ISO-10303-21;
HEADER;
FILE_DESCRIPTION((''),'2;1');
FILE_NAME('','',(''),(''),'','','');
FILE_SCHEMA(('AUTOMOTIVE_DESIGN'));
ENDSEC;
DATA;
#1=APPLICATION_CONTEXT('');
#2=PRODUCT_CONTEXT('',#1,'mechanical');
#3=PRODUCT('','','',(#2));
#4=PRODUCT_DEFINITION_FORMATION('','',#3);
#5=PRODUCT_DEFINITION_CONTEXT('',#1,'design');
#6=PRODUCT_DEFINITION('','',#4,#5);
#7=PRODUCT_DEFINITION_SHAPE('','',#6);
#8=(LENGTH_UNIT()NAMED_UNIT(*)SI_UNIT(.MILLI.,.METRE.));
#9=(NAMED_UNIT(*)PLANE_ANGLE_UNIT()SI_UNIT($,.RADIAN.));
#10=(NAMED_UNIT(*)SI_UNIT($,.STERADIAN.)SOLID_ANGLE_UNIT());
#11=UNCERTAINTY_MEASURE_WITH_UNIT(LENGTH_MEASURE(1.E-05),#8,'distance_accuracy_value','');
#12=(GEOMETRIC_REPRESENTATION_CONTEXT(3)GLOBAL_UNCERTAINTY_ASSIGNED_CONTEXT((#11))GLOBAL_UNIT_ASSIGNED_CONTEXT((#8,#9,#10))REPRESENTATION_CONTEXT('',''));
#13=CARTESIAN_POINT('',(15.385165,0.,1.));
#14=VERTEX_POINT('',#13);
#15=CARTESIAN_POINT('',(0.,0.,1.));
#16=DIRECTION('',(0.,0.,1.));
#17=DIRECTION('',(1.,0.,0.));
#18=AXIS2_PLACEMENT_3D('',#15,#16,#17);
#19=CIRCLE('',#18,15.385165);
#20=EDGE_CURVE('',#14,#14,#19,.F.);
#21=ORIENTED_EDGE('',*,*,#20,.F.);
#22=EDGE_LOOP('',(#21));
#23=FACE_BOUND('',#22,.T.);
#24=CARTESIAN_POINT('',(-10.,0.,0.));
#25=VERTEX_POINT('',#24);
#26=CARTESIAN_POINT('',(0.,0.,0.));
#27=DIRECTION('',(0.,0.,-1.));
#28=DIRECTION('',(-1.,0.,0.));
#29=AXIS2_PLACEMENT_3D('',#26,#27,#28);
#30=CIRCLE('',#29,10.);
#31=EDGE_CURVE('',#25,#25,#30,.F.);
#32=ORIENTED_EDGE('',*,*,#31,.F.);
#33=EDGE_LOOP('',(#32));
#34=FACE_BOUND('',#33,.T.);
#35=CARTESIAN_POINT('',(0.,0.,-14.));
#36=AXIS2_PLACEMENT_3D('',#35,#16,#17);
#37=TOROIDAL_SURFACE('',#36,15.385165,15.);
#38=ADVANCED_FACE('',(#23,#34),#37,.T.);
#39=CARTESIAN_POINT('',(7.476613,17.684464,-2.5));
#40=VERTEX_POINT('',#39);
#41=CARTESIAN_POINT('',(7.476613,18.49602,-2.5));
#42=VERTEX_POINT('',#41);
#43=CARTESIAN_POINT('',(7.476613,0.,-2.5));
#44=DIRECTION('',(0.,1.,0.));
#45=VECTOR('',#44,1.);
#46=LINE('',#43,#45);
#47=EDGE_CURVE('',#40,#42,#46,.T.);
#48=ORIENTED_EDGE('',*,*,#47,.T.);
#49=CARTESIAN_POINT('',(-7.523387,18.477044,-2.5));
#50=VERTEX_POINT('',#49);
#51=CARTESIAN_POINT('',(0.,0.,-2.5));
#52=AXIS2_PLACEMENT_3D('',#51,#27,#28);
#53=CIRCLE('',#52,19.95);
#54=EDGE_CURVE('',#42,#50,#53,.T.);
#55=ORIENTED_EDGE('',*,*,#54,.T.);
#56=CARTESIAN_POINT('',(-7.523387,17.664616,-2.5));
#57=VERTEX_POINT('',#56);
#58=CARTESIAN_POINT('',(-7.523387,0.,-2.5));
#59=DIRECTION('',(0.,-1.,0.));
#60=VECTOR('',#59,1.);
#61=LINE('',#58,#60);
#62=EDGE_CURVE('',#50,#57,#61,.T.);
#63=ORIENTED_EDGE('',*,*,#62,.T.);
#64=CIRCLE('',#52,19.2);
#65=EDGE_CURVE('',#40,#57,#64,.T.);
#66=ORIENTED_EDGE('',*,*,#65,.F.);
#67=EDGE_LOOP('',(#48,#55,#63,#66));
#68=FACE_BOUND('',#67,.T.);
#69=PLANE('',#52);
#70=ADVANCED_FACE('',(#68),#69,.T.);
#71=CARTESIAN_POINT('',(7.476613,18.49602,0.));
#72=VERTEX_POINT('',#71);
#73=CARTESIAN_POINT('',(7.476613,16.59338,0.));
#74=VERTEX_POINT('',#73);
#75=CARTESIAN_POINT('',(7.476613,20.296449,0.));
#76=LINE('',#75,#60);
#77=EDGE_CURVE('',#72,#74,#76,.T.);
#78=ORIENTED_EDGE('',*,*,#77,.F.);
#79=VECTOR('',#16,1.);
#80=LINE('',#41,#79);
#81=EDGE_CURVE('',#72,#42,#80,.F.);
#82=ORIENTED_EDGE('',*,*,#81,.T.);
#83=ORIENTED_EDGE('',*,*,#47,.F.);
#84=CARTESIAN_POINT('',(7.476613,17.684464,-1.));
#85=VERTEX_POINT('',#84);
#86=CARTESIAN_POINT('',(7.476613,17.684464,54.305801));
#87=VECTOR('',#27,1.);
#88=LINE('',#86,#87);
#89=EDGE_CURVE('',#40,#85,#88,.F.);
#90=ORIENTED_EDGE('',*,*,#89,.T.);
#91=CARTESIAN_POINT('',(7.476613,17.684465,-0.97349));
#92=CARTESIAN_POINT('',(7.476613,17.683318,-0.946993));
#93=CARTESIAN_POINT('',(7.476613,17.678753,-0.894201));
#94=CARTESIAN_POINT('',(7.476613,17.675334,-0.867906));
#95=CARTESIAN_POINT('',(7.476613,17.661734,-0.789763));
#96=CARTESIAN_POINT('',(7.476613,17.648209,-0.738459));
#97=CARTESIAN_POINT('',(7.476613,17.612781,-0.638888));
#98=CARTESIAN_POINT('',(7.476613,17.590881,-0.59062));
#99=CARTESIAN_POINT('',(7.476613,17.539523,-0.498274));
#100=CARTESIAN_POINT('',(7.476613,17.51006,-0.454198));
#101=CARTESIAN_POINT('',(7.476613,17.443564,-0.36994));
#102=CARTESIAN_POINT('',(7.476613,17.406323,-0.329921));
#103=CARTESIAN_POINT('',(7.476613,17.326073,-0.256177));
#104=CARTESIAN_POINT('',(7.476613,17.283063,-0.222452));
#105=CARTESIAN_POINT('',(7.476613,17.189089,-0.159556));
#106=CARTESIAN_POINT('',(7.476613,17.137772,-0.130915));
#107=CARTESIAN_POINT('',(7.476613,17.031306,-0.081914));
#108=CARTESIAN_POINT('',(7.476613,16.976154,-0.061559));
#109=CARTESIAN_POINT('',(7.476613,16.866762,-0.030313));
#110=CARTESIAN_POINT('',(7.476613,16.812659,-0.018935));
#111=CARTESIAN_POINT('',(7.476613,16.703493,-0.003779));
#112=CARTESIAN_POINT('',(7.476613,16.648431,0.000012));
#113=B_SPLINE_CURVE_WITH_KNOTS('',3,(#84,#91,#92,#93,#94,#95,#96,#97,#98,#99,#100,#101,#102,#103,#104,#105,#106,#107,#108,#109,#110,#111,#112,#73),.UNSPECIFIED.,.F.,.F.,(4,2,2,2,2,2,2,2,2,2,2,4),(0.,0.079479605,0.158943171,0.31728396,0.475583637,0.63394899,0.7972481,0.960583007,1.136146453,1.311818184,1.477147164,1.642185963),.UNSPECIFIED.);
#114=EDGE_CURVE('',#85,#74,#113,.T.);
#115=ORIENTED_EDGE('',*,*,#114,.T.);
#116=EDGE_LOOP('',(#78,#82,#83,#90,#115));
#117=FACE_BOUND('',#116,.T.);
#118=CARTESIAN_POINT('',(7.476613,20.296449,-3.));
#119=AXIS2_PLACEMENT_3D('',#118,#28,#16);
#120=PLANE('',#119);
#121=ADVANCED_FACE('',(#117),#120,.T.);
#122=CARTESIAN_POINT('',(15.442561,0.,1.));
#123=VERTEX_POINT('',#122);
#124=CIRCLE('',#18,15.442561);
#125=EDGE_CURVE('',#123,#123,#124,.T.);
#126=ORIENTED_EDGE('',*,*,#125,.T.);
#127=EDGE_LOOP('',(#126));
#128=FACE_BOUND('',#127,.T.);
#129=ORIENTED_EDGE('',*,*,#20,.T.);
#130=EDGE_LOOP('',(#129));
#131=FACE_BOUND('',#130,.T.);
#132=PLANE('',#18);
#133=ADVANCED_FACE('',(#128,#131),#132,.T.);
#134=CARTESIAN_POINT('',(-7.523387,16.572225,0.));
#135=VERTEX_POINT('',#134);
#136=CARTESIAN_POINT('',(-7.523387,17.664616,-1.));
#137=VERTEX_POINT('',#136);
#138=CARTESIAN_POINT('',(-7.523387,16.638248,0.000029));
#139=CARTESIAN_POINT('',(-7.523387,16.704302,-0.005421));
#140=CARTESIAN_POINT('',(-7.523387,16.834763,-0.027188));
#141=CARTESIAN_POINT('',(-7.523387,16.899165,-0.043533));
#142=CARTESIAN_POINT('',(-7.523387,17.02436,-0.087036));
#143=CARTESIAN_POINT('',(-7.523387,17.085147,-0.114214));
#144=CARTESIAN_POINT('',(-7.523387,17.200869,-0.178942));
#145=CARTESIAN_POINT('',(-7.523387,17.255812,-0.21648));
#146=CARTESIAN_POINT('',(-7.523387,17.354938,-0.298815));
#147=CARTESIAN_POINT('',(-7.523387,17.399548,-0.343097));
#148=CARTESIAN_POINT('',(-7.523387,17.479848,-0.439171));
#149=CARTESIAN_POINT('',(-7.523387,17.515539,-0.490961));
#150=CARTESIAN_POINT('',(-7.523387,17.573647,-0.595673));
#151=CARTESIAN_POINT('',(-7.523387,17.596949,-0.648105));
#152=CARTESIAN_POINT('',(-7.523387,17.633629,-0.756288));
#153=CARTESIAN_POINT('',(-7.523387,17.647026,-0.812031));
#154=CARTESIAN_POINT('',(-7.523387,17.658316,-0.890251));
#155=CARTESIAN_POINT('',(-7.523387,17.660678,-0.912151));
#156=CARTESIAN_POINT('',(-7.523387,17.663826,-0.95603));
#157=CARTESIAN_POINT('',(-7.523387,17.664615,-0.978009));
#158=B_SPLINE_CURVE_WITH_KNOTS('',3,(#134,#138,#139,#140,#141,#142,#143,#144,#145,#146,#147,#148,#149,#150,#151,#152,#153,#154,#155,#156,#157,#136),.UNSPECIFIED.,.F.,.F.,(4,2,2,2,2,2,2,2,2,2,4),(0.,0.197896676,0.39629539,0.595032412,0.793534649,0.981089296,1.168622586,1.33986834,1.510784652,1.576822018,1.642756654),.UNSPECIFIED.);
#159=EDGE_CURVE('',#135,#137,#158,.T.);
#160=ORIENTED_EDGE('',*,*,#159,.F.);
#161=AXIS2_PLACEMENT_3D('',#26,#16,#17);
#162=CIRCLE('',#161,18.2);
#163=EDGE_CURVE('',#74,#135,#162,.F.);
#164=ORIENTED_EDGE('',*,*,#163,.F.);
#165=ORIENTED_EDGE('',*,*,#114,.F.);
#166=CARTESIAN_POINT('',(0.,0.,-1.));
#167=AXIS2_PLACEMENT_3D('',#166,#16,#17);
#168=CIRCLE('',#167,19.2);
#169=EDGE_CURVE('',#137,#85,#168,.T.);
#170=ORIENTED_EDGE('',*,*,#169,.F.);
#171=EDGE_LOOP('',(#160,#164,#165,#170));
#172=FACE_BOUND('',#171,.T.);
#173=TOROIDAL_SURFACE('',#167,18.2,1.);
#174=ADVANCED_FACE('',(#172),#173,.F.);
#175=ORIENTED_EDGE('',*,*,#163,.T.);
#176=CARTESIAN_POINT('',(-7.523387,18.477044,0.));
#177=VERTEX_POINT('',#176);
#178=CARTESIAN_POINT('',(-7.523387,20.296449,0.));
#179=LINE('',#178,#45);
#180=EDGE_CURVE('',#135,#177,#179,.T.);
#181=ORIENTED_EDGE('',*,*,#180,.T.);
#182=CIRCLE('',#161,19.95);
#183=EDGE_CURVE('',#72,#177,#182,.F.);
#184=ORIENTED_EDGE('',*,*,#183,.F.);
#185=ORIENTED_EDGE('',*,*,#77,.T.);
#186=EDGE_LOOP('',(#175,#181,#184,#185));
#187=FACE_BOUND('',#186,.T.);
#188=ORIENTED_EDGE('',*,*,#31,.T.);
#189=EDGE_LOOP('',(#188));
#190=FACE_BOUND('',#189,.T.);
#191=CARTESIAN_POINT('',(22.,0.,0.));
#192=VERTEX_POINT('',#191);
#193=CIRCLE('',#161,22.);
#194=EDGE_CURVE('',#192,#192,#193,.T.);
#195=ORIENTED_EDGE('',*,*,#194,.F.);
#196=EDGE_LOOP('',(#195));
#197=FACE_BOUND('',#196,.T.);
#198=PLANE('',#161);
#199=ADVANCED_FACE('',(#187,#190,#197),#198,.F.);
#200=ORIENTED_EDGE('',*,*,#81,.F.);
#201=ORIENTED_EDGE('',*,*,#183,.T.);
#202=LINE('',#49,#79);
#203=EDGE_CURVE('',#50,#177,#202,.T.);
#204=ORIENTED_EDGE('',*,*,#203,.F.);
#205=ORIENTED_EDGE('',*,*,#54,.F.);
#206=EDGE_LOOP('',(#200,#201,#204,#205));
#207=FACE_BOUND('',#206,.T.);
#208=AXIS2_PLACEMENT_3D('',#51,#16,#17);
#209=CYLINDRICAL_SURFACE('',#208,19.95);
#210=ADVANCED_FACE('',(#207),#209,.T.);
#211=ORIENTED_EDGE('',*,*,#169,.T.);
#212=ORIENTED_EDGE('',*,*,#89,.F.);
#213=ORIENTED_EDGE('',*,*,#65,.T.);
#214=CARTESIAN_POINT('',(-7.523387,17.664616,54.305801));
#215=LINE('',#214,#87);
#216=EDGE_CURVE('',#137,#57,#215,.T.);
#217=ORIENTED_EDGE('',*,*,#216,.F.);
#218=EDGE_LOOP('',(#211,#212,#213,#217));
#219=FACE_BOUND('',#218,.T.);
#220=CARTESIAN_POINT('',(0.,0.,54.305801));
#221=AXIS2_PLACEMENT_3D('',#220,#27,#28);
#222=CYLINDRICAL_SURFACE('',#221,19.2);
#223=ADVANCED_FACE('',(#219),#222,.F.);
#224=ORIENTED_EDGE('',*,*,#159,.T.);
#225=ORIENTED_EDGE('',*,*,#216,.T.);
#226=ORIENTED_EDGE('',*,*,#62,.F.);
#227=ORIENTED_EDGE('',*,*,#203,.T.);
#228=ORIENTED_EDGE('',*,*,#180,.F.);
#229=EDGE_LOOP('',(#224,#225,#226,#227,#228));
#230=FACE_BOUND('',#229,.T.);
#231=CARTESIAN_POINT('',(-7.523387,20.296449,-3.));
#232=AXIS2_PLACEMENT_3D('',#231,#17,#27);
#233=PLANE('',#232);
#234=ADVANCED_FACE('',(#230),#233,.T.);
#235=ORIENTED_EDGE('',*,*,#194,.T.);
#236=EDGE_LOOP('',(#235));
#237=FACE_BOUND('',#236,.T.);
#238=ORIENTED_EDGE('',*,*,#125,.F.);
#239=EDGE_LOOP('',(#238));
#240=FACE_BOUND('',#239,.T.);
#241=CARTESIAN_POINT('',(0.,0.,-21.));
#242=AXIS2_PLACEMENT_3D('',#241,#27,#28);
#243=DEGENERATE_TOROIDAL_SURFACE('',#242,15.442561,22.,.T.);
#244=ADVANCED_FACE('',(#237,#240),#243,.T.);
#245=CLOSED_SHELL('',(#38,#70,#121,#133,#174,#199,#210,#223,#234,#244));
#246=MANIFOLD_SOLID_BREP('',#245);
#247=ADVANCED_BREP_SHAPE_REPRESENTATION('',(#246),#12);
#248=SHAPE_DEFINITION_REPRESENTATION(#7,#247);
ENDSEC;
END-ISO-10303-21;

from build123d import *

# Parameters (mm, degrees)
SKETCH3_R           = 22
BOSS_EXTRUDE1_DEPTH = 1
SKETCH7_R           = 10
CUT_EXTRUDE1_DEPTH  = 10
FILLET7_R           = 22
FILLET8_R           = 15
SKETCH8_R           = 19.95
BOSS_EXTRUDE2_DEPTH = 2.5
SKETCH9_R           = 19.2
CUT_EXTRUDE2_DEPTH  = 2.5
SKETCH10_W          = 15
SKETCH10_H          = 3
CUT_EXTRUDE3_DEPTH  = 3
FILLET9_R           = 1


with BuildPart() as part:
    # Sketch3 → Boss-Extrude1 (new body)
    with BuildSketch(Plane.XY):
        Circle(SKETCH3_R)
    extrude(amount=BOSS_EXTRUDE1_DEPTH)

    # Sketch7 → Cut-Extrude1 (cut)
    with BuildSketch(Plane.XY.offset(1)):
        Circle(SKETCH7_R)
    extrude(amount=-CUT_EXTRUDE1_DEPTH, mode=Mode.SUBTRACT)

    # Fillet7
    # the kernel refuses this fillet: 22 mm, written as the material it takes off along each edge
    with BuildSketch(Plane(origin=(0, 0, 1), x_dir=(1, 0, 0), z_dir=(0, -1, 0))) as fillet7_piece_1:
        with BuildLine():
            CenterArc((15.442561476, -22), FILLET7_R, 72.658557197, 17.341442803)
            Line((15.442561476, 0), (15.442561476, 0.44))
            Line((15.442561476, 0.44), (22, 0.44))
            Line((22, 0.44), (22.44, 0))
            ThreePointArc((22.44, 0), (22.44, -0.5), (22.13114877, -0.58))
            Line((22.13114877, -0.58), (22, -1))
        make_face()
    revolve(axis=Axis((0, 0, 1), (0, 0, 1)), mode=Mode.SUBTRACT)

    # Fillet8
    # the kernel refuses this fillet: 15 mm, written as the material it takes off along each edge
    with BuildSketch(Plane(origin=(0, 0, 1), x_dir=(1, 0, 0), z_dir=(0, -1, 0))) as fillet8_piece_1:
        with BuildLine():
            CenterArc((15.385164807, -15), FILLET8_R, 90, 21.039469781)
            Line((15.385164807, 0), (15.385164807, 0.3))
            Line((15.385164807, 0.3), (10, 0.3))
            Line((10, 0.3), (9.7, 0))
            ThreePointArc((9.7, 0), (9.7, -0.5), (9.892296704, -0.72))
            Line((9.892296704, -0.72), (10, -1))
        make_face()
    revolve(axis=Axis((0, 0, 1), (0, 0, 1)), mode=Mode.SUBTRACT)

    # Sketch8 → Boss-Extrude2 (add)
    with BuildSketch(Plane(origin=(0, 0, 0), x_dir=(-1, 0, 0), z_dir=(0, 0, -1))):
        with Locations(Location((0, 0, 0), (0, 0, 180))):
            Circle(SKETCH8_R)
    extrude(amount=BOSS_EXTRUDE2_DEPTH)

    # Sketch9 → Cut-Extrude2 (cut)
    with BuildSketch(Plane(origin=(0, 0, -2.5), x_dir=(-1, 0, 0), z_dir=(0, 0, -1))):
        Circle(SKETCH9_R)
    extrude(amount=-CUT_EXTRUDE2_DEPTH, mode=Mode.SUBTRACT)

    # Sketch10 → Cut-Extrude3 (cut)
    with BuildSketch(Plane(origin=(0, 0, 0), x_dir=(-1, 0, 0), z_dir=(0, 0, -1))):
        with Locations((0.023386831, 18.796449373)):
            Rectangle(SKETCH10_W, SKETCH10_H)
    extrude(amount=CUT_EXTRUDE3_DEPTH, mode=Mode.SUBTRACT)

    # Fillet9
    fillet9_edges = [part.edges().sort_by_distance(p)[0] for p in [
        (0.025405287, -19.199983192, 0),
    ]]
    fillet(fillet9_edges, radius=FILLET9_R)


solid = part.part
